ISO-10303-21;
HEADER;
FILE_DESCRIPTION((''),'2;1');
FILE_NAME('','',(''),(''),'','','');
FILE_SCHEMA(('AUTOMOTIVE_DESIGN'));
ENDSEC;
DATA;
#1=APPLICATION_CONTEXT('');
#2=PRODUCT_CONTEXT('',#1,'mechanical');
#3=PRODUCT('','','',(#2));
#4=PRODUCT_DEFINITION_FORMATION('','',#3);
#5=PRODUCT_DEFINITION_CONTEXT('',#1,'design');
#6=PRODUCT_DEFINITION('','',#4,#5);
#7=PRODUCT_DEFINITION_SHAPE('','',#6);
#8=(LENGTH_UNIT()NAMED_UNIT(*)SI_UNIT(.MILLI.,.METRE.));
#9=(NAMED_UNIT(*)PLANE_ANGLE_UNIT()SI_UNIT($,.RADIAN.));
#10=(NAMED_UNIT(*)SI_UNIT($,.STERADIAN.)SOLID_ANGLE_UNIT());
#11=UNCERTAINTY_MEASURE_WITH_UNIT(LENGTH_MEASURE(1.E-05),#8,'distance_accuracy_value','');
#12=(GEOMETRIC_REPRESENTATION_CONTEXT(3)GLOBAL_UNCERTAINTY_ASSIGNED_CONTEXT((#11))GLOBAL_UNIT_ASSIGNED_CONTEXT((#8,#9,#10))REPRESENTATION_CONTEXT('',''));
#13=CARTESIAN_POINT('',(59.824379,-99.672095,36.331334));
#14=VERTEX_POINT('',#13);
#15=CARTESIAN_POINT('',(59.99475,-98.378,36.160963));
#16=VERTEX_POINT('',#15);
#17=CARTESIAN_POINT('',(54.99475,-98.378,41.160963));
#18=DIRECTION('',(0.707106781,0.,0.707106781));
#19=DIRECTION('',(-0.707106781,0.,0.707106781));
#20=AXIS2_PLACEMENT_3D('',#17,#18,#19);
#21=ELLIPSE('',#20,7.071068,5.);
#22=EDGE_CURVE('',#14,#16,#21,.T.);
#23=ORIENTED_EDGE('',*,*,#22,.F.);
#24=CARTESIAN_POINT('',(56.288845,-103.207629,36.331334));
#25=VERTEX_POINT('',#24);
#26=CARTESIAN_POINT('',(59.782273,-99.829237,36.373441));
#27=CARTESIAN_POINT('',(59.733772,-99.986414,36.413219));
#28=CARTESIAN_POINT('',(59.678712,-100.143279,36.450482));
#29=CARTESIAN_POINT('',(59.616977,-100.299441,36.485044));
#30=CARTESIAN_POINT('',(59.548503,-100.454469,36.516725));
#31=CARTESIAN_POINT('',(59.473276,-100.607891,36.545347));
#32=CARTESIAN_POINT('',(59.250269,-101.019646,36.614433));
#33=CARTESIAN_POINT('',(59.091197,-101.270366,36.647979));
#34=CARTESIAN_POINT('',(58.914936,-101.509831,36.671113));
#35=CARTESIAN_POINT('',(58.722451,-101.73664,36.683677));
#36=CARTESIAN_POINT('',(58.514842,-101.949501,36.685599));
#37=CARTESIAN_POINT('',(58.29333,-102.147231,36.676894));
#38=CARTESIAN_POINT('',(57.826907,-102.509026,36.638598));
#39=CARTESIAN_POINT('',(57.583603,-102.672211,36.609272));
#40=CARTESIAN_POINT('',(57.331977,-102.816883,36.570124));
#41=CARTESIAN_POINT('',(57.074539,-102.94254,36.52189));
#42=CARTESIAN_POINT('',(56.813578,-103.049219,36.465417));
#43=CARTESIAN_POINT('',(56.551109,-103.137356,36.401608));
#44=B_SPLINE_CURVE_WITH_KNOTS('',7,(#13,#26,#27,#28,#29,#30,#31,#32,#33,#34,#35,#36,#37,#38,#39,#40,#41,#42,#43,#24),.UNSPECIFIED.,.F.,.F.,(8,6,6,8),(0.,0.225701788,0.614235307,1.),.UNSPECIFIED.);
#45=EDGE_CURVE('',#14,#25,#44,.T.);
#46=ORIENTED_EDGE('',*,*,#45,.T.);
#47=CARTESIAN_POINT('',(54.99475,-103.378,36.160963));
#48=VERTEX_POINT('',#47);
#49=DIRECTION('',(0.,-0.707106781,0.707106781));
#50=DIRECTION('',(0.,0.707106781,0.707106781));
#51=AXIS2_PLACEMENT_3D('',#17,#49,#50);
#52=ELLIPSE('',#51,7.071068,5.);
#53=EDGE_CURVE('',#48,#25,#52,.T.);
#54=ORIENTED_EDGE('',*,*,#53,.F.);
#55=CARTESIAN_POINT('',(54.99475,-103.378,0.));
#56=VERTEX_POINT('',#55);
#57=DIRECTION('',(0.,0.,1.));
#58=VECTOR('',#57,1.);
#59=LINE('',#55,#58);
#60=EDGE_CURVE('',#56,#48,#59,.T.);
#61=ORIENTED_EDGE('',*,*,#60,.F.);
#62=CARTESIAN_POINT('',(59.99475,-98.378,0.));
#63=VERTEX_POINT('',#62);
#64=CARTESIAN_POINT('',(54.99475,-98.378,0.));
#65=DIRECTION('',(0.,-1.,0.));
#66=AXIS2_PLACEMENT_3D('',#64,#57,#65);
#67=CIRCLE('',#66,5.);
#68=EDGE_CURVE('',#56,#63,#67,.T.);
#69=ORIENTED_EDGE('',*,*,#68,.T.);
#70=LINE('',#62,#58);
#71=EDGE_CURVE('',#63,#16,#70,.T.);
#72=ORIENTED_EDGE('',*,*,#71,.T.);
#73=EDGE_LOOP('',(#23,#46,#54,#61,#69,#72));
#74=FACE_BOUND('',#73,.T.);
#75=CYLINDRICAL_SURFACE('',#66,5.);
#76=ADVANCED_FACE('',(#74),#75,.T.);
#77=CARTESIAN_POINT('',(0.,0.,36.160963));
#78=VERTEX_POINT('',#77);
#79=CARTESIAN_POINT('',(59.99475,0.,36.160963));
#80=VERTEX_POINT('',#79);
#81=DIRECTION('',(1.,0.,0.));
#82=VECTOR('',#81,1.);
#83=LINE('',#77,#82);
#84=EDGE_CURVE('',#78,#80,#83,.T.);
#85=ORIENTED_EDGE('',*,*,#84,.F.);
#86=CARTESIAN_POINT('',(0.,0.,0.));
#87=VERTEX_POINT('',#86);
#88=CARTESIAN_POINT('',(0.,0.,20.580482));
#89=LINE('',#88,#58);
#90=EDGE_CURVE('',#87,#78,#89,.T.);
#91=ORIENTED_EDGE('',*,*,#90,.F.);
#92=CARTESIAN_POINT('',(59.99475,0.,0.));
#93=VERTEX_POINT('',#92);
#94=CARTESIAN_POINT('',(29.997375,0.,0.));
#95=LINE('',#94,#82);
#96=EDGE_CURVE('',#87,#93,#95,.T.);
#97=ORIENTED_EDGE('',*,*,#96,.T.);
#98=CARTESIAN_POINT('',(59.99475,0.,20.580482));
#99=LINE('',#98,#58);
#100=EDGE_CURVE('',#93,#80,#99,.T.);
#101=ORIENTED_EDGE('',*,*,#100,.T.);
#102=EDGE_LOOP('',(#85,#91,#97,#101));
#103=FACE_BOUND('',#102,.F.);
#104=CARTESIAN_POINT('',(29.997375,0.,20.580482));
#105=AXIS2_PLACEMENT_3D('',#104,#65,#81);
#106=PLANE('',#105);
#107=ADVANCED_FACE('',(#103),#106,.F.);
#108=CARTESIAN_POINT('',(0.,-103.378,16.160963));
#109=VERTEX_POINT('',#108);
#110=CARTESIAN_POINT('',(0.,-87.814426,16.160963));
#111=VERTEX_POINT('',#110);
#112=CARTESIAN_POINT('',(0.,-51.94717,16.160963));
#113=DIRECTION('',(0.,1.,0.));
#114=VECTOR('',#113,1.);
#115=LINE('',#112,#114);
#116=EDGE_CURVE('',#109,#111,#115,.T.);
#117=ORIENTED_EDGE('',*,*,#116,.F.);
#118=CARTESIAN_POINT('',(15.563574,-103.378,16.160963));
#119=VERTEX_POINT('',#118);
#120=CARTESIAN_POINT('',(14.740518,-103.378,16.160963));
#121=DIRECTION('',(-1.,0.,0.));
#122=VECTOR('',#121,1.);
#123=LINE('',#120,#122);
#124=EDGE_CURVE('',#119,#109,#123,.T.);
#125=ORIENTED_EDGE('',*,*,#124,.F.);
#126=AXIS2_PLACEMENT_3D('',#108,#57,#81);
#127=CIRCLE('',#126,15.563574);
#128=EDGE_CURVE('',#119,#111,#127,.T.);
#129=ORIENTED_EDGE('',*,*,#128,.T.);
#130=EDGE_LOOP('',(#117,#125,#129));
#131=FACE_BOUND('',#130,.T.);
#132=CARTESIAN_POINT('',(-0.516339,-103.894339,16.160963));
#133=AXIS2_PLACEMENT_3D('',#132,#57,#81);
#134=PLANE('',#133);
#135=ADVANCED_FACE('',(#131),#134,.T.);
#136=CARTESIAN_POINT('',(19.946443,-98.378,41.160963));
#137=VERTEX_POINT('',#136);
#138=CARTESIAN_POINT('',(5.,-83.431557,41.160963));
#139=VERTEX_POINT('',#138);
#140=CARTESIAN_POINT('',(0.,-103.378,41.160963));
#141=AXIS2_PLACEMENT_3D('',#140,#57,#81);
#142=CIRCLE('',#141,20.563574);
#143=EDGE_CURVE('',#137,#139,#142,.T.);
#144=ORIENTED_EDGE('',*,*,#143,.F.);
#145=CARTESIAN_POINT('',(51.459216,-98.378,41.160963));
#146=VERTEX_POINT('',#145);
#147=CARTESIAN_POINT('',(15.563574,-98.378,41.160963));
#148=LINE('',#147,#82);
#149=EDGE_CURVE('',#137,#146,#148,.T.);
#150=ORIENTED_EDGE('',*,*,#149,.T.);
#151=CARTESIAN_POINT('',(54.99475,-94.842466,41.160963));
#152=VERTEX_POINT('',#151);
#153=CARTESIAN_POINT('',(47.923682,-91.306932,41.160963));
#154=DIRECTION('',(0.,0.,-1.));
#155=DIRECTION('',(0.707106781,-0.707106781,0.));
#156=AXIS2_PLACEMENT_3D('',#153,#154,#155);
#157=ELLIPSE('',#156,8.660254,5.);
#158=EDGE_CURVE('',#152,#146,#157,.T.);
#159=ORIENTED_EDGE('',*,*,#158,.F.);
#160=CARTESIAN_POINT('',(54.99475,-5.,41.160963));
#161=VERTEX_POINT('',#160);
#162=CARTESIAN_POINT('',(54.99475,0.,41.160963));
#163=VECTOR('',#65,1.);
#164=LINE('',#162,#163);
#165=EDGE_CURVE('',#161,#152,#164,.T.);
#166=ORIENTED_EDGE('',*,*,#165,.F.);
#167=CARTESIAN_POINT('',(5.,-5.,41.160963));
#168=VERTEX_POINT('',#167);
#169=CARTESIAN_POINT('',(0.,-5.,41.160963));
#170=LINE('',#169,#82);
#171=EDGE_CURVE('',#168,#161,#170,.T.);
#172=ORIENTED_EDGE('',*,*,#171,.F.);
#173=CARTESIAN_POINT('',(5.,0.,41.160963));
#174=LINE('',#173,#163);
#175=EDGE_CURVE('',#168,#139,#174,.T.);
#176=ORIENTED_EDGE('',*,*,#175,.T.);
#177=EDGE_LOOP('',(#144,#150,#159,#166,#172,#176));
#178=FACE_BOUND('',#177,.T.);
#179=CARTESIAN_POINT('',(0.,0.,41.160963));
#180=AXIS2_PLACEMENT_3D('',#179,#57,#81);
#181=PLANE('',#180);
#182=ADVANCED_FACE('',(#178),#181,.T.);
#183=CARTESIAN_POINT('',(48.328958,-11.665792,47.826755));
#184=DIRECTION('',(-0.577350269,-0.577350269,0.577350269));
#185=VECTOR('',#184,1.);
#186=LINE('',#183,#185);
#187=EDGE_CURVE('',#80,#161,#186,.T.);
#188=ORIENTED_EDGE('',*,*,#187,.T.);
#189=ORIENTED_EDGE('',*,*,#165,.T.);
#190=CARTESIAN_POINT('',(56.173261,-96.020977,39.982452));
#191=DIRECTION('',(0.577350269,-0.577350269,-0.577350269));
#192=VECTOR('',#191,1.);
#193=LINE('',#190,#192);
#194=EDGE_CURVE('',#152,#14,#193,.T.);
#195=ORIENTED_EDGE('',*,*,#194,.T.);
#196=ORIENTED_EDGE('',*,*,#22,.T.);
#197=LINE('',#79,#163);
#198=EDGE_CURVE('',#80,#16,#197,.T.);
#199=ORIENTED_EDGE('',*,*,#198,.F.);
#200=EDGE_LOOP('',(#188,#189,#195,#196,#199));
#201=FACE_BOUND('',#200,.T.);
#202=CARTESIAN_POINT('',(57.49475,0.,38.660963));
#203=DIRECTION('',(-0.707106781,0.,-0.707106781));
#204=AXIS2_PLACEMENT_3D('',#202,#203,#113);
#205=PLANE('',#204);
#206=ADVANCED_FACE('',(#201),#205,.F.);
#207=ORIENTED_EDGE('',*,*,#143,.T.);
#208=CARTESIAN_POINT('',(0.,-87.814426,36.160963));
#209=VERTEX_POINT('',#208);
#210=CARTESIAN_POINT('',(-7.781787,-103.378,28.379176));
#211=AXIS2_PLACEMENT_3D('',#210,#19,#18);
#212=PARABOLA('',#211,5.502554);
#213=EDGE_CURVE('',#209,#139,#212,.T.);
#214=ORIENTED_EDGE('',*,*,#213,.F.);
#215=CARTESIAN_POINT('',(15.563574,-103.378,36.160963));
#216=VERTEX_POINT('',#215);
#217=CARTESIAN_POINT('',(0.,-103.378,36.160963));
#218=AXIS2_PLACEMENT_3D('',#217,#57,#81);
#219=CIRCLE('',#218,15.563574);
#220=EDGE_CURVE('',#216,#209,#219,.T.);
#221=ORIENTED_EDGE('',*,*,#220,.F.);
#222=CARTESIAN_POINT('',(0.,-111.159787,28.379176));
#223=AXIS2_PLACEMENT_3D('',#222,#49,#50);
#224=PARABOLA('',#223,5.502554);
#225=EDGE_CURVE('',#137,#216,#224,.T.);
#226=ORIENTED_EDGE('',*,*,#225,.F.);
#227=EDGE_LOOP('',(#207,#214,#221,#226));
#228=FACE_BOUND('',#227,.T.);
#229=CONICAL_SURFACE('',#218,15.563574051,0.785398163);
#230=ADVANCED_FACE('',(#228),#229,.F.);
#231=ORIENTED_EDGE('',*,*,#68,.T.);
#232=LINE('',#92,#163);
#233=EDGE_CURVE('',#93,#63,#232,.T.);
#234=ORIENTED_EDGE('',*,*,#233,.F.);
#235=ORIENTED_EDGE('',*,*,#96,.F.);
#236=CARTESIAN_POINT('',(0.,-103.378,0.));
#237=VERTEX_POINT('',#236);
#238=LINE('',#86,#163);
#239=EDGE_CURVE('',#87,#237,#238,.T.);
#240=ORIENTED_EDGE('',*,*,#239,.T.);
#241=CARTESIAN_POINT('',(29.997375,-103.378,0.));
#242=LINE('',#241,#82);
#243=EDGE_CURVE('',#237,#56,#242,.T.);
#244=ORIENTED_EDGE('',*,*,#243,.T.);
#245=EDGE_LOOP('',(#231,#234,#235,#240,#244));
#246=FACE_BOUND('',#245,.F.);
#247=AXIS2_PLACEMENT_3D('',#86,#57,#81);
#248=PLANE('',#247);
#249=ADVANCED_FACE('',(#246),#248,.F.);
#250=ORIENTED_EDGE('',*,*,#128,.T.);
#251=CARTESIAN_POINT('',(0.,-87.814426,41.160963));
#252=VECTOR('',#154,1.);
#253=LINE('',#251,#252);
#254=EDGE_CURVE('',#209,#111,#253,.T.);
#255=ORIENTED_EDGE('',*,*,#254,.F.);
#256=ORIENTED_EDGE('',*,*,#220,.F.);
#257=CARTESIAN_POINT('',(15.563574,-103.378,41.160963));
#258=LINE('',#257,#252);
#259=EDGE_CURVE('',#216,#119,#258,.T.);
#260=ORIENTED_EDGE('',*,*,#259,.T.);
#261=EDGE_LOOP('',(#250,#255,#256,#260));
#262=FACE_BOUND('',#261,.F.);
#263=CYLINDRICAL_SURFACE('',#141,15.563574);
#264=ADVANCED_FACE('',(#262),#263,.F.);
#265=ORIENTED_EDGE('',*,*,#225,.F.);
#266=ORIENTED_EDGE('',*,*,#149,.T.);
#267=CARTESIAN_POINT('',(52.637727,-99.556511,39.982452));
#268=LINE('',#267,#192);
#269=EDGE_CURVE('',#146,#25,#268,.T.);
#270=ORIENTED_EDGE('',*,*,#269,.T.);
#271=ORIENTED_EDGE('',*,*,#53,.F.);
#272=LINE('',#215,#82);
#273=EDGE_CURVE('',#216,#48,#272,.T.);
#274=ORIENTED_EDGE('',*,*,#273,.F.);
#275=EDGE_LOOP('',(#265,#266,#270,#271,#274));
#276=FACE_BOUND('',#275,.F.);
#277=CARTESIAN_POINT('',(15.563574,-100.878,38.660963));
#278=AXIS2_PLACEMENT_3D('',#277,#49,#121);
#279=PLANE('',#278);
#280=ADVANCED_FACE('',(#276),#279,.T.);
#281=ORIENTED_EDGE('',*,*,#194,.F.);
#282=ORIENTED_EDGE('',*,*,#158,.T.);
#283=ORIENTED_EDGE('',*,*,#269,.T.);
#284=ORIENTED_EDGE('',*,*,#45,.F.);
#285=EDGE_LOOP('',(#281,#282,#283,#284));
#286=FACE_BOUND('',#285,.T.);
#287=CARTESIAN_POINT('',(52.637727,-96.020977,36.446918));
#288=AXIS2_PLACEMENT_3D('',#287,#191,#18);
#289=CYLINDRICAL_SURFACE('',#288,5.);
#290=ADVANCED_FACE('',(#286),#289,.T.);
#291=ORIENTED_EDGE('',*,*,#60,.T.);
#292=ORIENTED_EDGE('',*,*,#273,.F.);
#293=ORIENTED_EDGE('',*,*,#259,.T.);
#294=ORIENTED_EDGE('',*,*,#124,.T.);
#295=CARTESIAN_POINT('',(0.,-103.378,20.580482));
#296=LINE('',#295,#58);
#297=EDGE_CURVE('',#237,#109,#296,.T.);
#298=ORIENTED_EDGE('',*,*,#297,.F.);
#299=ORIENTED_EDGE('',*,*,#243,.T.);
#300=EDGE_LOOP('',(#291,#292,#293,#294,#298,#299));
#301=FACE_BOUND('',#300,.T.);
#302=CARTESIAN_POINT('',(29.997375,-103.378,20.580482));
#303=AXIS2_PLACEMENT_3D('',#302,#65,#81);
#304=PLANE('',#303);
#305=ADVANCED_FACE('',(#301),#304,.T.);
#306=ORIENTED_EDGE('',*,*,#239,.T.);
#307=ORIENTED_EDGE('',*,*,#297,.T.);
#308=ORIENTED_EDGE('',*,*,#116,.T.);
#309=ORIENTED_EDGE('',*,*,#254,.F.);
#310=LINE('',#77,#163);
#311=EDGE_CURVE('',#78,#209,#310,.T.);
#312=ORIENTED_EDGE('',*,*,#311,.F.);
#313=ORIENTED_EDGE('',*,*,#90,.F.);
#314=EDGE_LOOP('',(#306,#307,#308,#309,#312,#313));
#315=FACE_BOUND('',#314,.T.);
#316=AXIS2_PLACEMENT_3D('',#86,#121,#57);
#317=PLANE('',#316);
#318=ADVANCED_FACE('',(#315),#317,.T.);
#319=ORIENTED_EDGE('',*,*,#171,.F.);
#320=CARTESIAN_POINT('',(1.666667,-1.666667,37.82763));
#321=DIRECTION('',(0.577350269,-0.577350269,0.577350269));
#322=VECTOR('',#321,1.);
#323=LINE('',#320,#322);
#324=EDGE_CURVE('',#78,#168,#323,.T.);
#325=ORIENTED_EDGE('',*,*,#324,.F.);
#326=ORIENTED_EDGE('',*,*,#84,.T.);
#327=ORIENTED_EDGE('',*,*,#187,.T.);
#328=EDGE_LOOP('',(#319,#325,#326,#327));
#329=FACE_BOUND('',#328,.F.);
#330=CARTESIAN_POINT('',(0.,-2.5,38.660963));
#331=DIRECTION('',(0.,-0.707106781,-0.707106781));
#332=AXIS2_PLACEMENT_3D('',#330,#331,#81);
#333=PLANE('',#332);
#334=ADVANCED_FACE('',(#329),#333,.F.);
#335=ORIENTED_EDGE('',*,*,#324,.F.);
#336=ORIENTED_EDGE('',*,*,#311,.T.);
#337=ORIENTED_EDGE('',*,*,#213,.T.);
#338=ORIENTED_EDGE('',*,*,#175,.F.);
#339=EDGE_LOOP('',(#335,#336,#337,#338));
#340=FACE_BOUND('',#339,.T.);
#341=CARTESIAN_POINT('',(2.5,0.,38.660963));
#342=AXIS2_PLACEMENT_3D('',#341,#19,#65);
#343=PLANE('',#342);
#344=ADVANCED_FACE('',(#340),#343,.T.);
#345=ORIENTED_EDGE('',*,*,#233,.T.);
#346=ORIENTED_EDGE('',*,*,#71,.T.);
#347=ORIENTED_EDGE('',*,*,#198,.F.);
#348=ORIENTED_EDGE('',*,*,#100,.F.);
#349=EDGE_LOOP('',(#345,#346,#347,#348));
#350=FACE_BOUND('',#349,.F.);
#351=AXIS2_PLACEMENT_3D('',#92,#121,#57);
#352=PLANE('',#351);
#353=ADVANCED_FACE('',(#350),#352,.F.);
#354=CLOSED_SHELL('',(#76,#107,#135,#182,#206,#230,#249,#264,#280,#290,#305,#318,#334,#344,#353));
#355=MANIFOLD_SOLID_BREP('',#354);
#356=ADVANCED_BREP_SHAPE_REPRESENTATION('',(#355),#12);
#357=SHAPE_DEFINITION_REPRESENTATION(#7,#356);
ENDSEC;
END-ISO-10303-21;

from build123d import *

# Parameters (mm, degrees)
F0_W     = 59.9947497249
F0_H     = 41.1609634757
F1_DEPTH = 103.378
F3_DEPTH = 25
F4_SIZE  = 5
F5_F1_R  = 5
F5_F2_R  = 5


with BuildPart() as f1:
    # F0 (on Front) → F1 (new body)
    with BuildSketch(Plane.XZ):
        with Locations((29.9973748624, 20.5804817379)):
            Rectangle(F0_W, F0_H)
    extrude(amount=F1_DEPTH)

    # F2 (on face) → F3 (cut)
    with BuildSketch(Plane.XY.offset(41.1609634757)):
        with BuildLine():
            ThreePointArc((0, -87.8144259489), (-11.005108751, -114.383108751), (15.5635740511, -103.378))
            Line((15.5635740511, -103.378), (0, -103.378))
            Line((0, -103.378), (0, -87.8144259489))
        make_face()
        with BuildLine():
            Line((0, -103.378), (15.5635740511, -103.378))
            ThreePointArc((15.5635740511, -103.378), (11.005108751, -92.372891249), (0, -87.8144259489))
            Line((0, -87.8144259489), (0, -103.378))
        make_face()
    extrude(amount=-F3_DEPTH, mode=Mode.SUBTRACT)

    # F4
    f4_edges = [f1.edges().sort_by_distance(p)[0] for p in [
        (29.997375, 0, 41.160963),
        (0, -43.907213, 41.160963),
        (11.005109, -92.372891, 41.160963),
        (37.779162, -103.378, 41.160963),
        (59.99475, -51.689, 41.160963),
    ]]
    chamfer(f4_edges, length=F4_SIZE)

    # F5: fillet of radius 5 on 2 edges, made by hand

    # F5_f1
    f5_f1_edges = [f1.edges().sort_by_distance(p)[0] for p in [
        (59.9947497249, -103.378, 18.0804817379),
    ]]
    fillet(f5_f1_edges, radius=F5_F1_R)

    # F5_f2
    f5_f2_edges = [f1.edges().sort_by_distance(p)[0] for p in [
        (56.7625166778, -100.145766953, 39.3931965227),
    ]]
    fillet(f5_f2_edges, radius=F5_F2_R)


solid = f1.part
